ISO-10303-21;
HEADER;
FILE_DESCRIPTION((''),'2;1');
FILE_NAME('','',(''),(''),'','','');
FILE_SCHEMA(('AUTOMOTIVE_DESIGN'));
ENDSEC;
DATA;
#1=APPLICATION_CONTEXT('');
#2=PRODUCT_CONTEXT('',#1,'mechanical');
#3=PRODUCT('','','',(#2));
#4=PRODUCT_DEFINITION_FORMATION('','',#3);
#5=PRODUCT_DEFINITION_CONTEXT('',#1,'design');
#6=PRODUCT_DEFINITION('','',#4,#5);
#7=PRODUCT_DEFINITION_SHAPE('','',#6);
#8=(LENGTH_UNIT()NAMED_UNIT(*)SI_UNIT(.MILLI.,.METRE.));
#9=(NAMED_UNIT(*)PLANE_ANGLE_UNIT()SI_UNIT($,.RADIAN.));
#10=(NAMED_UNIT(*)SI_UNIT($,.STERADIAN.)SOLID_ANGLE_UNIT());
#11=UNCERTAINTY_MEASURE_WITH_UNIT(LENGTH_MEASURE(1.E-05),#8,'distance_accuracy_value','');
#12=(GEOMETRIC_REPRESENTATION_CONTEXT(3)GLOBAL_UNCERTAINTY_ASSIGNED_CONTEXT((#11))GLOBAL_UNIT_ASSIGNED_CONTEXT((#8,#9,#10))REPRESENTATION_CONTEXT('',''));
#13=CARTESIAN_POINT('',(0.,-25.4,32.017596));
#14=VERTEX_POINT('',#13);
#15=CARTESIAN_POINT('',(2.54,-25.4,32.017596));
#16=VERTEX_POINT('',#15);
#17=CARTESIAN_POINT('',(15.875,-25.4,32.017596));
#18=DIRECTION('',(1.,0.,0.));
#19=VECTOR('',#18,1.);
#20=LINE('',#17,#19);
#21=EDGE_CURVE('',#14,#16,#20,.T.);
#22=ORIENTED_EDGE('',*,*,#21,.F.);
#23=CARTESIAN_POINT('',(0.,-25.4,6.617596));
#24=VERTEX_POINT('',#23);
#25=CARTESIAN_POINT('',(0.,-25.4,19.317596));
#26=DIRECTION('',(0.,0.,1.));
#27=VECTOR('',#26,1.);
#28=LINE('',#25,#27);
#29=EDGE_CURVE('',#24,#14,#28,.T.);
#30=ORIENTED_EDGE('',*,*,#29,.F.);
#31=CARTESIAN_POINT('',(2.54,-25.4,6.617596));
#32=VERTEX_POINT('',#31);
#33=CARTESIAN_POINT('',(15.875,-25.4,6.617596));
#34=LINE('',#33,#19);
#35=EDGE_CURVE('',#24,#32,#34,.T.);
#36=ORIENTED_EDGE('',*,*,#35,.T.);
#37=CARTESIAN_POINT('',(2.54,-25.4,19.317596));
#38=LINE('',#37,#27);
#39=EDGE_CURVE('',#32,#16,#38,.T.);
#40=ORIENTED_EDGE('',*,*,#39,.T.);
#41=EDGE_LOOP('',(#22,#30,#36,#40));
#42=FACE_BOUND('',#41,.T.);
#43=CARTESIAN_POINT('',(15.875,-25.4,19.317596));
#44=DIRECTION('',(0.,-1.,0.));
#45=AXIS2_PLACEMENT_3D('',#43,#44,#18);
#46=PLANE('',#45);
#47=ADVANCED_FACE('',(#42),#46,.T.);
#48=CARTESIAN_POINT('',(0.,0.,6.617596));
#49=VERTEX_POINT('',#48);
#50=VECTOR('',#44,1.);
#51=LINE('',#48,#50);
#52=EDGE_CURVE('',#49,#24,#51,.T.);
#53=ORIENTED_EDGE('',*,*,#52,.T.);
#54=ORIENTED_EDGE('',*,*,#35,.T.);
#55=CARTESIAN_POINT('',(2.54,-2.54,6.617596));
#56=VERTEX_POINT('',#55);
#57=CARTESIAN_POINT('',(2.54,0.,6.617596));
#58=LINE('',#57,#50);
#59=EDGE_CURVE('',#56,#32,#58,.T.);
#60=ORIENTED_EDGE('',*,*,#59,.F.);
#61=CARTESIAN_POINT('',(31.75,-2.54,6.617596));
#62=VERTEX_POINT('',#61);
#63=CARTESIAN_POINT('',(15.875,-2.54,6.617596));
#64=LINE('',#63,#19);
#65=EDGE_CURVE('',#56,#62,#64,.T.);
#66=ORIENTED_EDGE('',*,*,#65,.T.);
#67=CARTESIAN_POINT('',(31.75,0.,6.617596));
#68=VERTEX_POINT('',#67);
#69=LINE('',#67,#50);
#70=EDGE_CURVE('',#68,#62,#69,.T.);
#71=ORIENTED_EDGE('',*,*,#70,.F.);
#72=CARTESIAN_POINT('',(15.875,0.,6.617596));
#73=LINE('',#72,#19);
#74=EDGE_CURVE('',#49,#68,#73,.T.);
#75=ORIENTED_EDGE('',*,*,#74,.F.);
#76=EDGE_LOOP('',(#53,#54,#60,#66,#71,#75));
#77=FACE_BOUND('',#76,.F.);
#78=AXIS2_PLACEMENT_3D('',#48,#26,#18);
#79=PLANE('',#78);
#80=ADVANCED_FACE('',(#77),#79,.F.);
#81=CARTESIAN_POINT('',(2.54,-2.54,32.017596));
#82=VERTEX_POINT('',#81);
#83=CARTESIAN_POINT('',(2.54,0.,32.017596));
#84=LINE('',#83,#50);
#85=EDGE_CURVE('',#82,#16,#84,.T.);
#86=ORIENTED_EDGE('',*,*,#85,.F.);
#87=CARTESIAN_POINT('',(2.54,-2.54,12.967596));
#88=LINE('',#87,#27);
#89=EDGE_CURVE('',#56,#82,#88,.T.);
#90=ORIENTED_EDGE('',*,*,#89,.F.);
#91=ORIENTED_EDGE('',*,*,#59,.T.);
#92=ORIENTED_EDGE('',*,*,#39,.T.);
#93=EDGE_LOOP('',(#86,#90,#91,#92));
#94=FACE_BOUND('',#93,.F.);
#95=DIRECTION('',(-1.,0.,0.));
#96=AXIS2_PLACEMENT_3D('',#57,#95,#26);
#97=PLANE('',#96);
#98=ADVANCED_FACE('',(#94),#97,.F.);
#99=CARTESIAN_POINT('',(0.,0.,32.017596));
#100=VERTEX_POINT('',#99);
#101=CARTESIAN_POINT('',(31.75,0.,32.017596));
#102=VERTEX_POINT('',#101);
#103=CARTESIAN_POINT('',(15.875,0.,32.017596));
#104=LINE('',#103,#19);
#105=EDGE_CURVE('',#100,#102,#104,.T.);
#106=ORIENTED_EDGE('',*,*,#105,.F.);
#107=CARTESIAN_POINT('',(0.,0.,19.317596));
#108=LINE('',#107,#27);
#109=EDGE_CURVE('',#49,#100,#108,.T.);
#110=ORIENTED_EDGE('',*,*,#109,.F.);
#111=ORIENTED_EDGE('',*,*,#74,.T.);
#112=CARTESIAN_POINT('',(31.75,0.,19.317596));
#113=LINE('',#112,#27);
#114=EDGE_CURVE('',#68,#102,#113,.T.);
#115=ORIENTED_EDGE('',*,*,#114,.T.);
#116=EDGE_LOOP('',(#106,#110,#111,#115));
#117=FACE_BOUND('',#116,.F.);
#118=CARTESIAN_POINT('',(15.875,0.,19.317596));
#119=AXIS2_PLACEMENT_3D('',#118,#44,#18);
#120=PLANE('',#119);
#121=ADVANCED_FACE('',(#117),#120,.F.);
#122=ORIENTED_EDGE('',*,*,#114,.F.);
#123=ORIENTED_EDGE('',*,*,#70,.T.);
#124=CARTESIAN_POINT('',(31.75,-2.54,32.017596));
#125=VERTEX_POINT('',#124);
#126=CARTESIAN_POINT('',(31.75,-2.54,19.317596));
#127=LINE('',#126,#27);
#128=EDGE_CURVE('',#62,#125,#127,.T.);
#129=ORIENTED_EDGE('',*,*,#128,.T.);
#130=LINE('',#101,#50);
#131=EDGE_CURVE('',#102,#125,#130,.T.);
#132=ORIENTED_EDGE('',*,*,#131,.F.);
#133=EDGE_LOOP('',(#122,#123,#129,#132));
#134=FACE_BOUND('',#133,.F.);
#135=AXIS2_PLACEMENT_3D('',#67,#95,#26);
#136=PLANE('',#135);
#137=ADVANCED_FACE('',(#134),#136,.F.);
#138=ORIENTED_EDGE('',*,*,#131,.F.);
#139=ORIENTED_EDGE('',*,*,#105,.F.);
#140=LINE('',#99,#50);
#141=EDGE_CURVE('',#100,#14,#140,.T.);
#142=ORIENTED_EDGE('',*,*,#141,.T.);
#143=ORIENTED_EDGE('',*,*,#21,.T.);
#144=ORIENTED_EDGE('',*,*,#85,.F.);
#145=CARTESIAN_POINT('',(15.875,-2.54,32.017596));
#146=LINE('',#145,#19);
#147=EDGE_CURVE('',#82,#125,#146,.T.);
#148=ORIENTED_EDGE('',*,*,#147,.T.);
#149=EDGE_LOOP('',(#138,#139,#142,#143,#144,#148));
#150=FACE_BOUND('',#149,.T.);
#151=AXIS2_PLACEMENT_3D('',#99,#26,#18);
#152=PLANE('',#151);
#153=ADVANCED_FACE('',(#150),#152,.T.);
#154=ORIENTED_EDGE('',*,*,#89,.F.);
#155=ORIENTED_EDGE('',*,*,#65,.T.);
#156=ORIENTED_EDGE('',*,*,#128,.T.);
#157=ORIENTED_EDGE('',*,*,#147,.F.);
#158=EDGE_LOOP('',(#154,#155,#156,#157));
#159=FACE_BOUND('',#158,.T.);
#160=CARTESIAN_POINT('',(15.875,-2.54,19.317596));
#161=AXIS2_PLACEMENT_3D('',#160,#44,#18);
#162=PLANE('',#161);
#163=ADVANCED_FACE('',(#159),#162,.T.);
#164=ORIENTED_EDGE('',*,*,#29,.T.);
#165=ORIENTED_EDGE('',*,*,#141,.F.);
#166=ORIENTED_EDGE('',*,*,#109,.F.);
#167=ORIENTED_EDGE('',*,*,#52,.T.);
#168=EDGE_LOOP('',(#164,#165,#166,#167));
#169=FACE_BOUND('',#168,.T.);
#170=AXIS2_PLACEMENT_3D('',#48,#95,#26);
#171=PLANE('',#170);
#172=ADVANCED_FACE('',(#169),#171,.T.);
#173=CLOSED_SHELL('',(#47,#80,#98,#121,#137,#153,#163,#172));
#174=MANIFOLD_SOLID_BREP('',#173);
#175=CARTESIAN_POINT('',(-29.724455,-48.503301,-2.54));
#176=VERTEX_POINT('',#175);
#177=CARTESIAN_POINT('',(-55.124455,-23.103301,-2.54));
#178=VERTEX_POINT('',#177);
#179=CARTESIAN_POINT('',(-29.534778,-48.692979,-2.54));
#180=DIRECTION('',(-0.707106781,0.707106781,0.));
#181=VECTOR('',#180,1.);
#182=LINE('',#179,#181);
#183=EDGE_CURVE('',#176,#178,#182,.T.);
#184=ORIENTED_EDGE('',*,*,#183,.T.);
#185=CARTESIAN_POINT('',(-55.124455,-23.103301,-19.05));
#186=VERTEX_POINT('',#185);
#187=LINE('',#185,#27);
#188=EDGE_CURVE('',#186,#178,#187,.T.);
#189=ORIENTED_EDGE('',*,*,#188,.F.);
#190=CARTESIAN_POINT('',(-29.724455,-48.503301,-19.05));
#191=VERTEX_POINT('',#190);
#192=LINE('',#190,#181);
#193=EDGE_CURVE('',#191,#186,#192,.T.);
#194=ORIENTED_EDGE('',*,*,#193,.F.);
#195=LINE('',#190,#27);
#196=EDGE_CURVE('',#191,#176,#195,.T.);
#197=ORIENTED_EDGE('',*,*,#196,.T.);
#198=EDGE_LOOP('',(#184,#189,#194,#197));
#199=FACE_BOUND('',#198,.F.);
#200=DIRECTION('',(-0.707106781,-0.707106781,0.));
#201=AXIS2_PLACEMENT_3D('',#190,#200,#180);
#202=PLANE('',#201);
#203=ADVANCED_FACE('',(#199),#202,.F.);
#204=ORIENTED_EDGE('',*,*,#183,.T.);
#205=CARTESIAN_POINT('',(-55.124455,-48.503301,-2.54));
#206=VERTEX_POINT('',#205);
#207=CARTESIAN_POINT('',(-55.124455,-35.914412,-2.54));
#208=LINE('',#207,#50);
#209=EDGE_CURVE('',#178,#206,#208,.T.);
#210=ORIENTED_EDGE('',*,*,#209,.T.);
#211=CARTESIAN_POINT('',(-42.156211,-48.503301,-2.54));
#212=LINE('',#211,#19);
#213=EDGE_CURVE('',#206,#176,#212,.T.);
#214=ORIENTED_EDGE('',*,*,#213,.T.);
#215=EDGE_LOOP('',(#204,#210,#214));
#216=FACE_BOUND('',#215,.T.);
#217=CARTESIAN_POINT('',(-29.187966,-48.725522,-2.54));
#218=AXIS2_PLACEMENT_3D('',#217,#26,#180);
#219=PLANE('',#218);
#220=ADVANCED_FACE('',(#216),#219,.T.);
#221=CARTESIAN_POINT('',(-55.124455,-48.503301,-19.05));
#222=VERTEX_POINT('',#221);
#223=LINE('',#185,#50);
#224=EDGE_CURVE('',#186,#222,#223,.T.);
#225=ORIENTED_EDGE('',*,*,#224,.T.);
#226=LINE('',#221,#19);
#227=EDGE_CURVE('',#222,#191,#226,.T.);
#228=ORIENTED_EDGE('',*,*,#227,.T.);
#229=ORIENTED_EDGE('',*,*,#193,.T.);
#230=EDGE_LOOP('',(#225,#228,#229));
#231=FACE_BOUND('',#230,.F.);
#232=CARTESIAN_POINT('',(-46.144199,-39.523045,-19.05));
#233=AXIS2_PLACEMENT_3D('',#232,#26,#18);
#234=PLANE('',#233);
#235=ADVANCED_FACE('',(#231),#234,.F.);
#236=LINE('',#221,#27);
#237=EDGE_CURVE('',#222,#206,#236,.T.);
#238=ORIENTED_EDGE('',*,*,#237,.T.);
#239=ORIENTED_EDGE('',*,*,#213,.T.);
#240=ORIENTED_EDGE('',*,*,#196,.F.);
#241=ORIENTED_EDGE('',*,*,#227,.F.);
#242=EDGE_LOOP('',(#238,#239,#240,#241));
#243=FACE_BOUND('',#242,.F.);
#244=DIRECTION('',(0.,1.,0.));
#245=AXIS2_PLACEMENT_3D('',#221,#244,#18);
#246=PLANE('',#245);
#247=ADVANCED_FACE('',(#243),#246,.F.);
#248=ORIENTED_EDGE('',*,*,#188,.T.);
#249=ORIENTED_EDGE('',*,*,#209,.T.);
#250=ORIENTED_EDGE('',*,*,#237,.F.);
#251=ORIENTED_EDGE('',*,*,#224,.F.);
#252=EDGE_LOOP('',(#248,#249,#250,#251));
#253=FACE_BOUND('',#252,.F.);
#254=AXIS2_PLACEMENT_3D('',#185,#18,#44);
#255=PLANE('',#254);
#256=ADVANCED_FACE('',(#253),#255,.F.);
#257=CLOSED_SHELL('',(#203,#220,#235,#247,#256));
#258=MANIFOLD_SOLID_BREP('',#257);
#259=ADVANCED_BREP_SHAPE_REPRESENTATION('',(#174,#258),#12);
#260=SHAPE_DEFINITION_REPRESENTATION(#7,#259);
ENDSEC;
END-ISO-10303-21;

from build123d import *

# Parameters (mm, degrees)
F0_W     = 31.75
F0_H     = 25.4
F1_DEPTH = 25.4
F2_T     = -2.54
F4_DEPTH = 19.05
F6_DEPTH = 2.54
F6_TAPER = -5


with BuildPart() as f1:
    # F0 (on Front) → F1 (new body)
    with BuildSketch(Plane.XZ):
        with Locations((15.875, 19.3175956197)):
            Rectangle(F0_W, F0_H)
    extrude(amount=F1_DEPTH)

    # F2
    f2_openings = [f1.faces().sort_by_distance(p)[0] for p in [
        (15.875, -25.4, 19.317596),
        (31.75, -12.7, 19.317596),
        (15.875, -12.7, 6.617596),
        (15.875, -12.7, 32.017596),
    ]]
    offset(amount=F2_T, openings=f2_openings)


with BuildPart() as f4:
    # F3 (on Top) → F4 (new body)
    with BuildSketch(Plane.XY):
        Polygon((-55.1244552851, -23.1033010297), (-55.1244552851, -48.5033010297), (-29.7244552851, -48.5033010297), align=None)
    extrude(amount=F4_DEPTH)


with BuildPart() as f4_1:
    # F5: moved
    add(f4.part.moved(Location((0, 0, -19.05))))

    # F4_face (on face) → F6 (cut)
    with BuildSketch(Plane(origin=(-46.6577886184, -40.036634363, 0), x_dir=(1, 0, 0), z_dir=(0, 0, 1))):
        Polygon((16.9333333333, -8.4666666667), (-8.4666666667, 16.9333333333), (-8.4666666667, -8.4666666667), align=None)
    extrude(amount=-F6_DEPTH, taper=F6_TAPER, mode=Mode.SUBTRACT)


solid = Compound([f1.part, f4_1.part])
